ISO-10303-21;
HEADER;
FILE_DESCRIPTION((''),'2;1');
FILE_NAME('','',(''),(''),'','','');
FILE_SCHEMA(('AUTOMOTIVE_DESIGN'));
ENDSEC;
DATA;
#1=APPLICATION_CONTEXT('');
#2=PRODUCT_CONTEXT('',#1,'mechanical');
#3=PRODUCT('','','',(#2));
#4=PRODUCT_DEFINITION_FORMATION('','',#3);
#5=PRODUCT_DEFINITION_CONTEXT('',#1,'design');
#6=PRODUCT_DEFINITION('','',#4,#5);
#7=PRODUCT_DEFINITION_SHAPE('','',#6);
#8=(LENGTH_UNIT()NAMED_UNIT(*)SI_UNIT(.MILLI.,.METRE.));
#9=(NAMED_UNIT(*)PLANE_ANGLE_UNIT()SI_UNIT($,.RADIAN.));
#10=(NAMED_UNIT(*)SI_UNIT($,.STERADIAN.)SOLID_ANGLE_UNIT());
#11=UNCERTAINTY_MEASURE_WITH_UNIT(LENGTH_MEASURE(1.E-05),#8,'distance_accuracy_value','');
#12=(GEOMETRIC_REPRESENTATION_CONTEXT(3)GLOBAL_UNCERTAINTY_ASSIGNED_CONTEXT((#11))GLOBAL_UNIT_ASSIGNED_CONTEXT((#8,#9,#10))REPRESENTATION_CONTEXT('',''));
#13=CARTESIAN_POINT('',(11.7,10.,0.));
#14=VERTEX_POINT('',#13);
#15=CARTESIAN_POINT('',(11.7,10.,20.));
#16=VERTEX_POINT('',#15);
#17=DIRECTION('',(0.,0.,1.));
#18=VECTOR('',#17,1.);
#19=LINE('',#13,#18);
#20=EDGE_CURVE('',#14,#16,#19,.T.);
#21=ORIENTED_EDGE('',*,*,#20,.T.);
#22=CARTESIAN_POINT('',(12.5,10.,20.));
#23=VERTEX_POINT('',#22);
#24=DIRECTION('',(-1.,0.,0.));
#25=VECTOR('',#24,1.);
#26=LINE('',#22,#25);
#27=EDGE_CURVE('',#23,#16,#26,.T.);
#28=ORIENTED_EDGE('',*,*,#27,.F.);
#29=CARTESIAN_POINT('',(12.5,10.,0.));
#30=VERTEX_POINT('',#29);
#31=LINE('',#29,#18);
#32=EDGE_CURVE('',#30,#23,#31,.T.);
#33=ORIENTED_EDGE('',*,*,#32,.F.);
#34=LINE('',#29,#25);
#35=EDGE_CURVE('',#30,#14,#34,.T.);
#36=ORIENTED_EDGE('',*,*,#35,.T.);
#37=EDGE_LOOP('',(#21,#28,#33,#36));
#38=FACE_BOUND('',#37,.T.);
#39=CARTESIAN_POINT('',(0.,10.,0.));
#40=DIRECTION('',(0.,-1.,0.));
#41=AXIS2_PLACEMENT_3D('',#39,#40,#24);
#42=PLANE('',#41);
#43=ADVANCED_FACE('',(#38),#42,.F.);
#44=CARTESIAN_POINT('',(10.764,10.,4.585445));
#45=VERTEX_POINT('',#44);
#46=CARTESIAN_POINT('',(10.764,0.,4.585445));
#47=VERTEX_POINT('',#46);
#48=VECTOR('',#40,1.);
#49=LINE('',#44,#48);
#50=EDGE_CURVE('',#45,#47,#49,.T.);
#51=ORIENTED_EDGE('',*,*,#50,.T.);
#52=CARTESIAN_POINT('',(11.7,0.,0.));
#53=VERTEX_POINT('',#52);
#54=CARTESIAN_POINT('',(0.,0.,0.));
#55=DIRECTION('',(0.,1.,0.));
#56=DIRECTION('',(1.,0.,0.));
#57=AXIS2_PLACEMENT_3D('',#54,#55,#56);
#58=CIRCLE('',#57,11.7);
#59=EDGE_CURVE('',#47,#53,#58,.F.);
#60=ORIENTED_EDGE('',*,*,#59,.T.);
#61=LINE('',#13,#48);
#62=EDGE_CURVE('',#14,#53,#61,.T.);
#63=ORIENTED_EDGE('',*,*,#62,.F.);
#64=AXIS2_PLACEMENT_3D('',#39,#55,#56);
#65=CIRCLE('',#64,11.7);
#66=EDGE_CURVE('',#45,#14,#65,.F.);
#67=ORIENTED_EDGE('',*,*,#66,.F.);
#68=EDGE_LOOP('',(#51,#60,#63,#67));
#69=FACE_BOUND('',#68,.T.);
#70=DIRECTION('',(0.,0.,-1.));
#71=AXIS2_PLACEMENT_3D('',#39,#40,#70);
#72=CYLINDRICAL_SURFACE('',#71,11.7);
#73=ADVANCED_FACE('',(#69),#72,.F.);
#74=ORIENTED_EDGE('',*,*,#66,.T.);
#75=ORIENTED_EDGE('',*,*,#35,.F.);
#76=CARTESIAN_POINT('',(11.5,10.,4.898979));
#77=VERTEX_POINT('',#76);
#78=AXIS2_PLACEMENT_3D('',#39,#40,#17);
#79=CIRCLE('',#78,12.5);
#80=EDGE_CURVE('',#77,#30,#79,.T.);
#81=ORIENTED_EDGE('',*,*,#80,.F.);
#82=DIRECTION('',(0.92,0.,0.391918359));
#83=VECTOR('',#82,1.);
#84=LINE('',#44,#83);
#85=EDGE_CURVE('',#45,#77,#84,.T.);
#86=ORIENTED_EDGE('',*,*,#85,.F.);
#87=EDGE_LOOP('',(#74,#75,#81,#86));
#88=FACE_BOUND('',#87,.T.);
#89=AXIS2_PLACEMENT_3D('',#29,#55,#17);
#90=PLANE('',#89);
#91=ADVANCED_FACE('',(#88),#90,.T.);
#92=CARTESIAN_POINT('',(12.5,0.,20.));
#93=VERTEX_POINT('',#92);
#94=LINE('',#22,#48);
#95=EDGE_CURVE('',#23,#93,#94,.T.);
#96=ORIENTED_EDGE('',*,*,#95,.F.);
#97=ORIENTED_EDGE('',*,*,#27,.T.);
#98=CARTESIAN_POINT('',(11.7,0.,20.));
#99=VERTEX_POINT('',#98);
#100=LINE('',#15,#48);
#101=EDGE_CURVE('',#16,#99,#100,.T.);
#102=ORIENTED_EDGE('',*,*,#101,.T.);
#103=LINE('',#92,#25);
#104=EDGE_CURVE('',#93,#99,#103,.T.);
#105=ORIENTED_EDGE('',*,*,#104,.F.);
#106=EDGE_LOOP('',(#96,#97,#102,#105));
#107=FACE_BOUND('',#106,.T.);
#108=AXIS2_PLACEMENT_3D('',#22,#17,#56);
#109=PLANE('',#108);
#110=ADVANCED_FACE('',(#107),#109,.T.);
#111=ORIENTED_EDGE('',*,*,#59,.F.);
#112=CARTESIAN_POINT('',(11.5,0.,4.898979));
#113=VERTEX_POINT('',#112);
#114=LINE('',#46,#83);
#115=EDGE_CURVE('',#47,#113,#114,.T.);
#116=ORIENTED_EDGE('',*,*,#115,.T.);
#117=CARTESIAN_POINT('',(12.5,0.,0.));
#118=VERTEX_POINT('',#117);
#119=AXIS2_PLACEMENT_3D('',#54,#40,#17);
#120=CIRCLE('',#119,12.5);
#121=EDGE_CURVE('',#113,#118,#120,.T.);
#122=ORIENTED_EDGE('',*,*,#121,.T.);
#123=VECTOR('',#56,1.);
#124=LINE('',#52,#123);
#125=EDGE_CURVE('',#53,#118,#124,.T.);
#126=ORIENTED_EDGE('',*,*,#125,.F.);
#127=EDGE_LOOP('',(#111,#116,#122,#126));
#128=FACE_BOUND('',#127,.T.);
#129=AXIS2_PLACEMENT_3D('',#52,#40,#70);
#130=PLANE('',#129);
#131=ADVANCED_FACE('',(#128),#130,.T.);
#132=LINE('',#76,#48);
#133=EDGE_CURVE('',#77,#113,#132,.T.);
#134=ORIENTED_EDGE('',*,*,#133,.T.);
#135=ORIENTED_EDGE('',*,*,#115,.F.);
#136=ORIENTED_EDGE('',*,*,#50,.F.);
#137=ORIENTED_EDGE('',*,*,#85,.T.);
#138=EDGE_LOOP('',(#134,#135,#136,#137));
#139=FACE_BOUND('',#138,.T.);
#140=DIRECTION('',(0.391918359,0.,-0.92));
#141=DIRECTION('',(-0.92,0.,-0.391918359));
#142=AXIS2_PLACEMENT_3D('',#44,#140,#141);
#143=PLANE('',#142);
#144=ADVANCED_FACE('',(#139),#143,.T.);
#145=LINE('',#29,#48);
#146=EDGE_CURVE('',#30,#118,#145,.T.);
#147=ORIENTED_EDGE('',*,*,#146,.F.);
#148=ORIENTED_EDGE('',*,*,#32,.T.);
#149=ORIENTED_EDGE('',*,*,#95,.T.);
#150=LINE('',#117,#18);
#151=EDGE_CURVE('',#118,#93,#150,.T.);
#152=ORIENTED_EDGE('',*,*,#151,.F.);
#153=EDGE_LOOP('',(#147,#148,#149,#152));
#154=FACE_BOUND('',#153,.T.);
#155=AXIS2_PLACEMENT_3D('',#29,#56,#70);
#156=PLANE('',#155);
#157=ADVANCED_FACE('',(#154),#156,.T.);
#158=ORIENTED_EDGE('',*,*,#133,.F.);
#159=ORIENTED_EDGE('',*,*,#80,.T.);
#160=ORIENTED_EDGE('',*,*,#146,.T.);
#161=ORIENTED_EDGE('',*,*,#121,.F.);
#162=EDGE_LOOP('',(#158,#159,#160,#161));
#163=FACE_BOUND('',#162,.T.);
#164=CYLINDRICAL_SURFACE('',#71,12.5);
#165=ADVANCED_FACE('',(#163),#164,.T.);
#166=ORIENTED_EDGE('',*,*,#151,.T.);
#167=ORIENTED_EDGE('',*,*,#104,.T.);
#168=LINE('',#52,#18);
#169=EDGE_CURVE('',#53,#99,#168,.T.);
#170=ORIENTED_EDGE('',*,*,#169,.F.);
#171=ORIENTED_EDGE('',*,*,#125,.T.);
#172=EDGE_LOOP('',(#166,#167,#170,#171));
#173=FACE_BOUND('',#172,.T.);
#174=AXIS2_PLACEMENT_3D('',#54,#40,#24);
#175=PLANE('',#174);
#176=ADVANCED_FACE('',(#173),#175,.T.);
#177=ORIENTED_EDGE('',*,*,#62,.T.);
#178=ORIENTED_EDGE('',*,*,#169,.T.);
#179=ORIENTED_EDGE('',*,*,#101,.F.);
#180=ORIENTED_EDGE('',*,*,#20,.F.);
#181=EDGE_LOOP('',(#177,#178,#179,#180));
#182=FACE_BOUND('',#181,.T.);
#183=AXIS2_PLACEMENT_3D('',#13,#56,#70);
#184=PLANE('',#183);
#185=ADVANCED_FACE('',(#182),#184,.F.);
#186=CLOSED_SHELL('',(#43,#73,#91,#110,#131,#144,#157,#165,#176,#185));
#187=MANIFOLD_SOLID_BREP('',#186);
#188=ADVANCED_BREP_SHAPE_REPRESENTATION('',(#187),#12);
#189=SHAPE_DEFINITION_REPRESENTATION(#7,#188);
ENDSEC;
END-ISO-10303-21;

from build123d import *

# Parameters (mm, degrees)
BASE_FLANGE1_DEPTH = 10


# Sheet-metal steps are written as plain solids
with BuildPart() as part:
    # Sketch2 → Base-Flange1 (new body)
    with BuildSketch(Plane(origin=(0, 0, 0), x_dir=(1, 0, 0), z_dir=(0, 1, 0))):
        with BuildLine():
            ThreePointArc((11.5, -4.898979486), (-12.247448714, 2.5), (12.5, 0))
            Line((12.5, 0), (12.5, -20))
            Line((12.5, -20), (11.7, -20))
            Line((11.7, -20), (11.7, 0))
            ThreePointArc((11.7, 0), (-11.463611996, 2.34), (10.764, -4.585444798))
            Line((10.764, -4.585444798), (11.5, -4.898979486))
        make_face()
    extrude(amount=BASE_FLANGE1_DEPTH)


solid = part.part
